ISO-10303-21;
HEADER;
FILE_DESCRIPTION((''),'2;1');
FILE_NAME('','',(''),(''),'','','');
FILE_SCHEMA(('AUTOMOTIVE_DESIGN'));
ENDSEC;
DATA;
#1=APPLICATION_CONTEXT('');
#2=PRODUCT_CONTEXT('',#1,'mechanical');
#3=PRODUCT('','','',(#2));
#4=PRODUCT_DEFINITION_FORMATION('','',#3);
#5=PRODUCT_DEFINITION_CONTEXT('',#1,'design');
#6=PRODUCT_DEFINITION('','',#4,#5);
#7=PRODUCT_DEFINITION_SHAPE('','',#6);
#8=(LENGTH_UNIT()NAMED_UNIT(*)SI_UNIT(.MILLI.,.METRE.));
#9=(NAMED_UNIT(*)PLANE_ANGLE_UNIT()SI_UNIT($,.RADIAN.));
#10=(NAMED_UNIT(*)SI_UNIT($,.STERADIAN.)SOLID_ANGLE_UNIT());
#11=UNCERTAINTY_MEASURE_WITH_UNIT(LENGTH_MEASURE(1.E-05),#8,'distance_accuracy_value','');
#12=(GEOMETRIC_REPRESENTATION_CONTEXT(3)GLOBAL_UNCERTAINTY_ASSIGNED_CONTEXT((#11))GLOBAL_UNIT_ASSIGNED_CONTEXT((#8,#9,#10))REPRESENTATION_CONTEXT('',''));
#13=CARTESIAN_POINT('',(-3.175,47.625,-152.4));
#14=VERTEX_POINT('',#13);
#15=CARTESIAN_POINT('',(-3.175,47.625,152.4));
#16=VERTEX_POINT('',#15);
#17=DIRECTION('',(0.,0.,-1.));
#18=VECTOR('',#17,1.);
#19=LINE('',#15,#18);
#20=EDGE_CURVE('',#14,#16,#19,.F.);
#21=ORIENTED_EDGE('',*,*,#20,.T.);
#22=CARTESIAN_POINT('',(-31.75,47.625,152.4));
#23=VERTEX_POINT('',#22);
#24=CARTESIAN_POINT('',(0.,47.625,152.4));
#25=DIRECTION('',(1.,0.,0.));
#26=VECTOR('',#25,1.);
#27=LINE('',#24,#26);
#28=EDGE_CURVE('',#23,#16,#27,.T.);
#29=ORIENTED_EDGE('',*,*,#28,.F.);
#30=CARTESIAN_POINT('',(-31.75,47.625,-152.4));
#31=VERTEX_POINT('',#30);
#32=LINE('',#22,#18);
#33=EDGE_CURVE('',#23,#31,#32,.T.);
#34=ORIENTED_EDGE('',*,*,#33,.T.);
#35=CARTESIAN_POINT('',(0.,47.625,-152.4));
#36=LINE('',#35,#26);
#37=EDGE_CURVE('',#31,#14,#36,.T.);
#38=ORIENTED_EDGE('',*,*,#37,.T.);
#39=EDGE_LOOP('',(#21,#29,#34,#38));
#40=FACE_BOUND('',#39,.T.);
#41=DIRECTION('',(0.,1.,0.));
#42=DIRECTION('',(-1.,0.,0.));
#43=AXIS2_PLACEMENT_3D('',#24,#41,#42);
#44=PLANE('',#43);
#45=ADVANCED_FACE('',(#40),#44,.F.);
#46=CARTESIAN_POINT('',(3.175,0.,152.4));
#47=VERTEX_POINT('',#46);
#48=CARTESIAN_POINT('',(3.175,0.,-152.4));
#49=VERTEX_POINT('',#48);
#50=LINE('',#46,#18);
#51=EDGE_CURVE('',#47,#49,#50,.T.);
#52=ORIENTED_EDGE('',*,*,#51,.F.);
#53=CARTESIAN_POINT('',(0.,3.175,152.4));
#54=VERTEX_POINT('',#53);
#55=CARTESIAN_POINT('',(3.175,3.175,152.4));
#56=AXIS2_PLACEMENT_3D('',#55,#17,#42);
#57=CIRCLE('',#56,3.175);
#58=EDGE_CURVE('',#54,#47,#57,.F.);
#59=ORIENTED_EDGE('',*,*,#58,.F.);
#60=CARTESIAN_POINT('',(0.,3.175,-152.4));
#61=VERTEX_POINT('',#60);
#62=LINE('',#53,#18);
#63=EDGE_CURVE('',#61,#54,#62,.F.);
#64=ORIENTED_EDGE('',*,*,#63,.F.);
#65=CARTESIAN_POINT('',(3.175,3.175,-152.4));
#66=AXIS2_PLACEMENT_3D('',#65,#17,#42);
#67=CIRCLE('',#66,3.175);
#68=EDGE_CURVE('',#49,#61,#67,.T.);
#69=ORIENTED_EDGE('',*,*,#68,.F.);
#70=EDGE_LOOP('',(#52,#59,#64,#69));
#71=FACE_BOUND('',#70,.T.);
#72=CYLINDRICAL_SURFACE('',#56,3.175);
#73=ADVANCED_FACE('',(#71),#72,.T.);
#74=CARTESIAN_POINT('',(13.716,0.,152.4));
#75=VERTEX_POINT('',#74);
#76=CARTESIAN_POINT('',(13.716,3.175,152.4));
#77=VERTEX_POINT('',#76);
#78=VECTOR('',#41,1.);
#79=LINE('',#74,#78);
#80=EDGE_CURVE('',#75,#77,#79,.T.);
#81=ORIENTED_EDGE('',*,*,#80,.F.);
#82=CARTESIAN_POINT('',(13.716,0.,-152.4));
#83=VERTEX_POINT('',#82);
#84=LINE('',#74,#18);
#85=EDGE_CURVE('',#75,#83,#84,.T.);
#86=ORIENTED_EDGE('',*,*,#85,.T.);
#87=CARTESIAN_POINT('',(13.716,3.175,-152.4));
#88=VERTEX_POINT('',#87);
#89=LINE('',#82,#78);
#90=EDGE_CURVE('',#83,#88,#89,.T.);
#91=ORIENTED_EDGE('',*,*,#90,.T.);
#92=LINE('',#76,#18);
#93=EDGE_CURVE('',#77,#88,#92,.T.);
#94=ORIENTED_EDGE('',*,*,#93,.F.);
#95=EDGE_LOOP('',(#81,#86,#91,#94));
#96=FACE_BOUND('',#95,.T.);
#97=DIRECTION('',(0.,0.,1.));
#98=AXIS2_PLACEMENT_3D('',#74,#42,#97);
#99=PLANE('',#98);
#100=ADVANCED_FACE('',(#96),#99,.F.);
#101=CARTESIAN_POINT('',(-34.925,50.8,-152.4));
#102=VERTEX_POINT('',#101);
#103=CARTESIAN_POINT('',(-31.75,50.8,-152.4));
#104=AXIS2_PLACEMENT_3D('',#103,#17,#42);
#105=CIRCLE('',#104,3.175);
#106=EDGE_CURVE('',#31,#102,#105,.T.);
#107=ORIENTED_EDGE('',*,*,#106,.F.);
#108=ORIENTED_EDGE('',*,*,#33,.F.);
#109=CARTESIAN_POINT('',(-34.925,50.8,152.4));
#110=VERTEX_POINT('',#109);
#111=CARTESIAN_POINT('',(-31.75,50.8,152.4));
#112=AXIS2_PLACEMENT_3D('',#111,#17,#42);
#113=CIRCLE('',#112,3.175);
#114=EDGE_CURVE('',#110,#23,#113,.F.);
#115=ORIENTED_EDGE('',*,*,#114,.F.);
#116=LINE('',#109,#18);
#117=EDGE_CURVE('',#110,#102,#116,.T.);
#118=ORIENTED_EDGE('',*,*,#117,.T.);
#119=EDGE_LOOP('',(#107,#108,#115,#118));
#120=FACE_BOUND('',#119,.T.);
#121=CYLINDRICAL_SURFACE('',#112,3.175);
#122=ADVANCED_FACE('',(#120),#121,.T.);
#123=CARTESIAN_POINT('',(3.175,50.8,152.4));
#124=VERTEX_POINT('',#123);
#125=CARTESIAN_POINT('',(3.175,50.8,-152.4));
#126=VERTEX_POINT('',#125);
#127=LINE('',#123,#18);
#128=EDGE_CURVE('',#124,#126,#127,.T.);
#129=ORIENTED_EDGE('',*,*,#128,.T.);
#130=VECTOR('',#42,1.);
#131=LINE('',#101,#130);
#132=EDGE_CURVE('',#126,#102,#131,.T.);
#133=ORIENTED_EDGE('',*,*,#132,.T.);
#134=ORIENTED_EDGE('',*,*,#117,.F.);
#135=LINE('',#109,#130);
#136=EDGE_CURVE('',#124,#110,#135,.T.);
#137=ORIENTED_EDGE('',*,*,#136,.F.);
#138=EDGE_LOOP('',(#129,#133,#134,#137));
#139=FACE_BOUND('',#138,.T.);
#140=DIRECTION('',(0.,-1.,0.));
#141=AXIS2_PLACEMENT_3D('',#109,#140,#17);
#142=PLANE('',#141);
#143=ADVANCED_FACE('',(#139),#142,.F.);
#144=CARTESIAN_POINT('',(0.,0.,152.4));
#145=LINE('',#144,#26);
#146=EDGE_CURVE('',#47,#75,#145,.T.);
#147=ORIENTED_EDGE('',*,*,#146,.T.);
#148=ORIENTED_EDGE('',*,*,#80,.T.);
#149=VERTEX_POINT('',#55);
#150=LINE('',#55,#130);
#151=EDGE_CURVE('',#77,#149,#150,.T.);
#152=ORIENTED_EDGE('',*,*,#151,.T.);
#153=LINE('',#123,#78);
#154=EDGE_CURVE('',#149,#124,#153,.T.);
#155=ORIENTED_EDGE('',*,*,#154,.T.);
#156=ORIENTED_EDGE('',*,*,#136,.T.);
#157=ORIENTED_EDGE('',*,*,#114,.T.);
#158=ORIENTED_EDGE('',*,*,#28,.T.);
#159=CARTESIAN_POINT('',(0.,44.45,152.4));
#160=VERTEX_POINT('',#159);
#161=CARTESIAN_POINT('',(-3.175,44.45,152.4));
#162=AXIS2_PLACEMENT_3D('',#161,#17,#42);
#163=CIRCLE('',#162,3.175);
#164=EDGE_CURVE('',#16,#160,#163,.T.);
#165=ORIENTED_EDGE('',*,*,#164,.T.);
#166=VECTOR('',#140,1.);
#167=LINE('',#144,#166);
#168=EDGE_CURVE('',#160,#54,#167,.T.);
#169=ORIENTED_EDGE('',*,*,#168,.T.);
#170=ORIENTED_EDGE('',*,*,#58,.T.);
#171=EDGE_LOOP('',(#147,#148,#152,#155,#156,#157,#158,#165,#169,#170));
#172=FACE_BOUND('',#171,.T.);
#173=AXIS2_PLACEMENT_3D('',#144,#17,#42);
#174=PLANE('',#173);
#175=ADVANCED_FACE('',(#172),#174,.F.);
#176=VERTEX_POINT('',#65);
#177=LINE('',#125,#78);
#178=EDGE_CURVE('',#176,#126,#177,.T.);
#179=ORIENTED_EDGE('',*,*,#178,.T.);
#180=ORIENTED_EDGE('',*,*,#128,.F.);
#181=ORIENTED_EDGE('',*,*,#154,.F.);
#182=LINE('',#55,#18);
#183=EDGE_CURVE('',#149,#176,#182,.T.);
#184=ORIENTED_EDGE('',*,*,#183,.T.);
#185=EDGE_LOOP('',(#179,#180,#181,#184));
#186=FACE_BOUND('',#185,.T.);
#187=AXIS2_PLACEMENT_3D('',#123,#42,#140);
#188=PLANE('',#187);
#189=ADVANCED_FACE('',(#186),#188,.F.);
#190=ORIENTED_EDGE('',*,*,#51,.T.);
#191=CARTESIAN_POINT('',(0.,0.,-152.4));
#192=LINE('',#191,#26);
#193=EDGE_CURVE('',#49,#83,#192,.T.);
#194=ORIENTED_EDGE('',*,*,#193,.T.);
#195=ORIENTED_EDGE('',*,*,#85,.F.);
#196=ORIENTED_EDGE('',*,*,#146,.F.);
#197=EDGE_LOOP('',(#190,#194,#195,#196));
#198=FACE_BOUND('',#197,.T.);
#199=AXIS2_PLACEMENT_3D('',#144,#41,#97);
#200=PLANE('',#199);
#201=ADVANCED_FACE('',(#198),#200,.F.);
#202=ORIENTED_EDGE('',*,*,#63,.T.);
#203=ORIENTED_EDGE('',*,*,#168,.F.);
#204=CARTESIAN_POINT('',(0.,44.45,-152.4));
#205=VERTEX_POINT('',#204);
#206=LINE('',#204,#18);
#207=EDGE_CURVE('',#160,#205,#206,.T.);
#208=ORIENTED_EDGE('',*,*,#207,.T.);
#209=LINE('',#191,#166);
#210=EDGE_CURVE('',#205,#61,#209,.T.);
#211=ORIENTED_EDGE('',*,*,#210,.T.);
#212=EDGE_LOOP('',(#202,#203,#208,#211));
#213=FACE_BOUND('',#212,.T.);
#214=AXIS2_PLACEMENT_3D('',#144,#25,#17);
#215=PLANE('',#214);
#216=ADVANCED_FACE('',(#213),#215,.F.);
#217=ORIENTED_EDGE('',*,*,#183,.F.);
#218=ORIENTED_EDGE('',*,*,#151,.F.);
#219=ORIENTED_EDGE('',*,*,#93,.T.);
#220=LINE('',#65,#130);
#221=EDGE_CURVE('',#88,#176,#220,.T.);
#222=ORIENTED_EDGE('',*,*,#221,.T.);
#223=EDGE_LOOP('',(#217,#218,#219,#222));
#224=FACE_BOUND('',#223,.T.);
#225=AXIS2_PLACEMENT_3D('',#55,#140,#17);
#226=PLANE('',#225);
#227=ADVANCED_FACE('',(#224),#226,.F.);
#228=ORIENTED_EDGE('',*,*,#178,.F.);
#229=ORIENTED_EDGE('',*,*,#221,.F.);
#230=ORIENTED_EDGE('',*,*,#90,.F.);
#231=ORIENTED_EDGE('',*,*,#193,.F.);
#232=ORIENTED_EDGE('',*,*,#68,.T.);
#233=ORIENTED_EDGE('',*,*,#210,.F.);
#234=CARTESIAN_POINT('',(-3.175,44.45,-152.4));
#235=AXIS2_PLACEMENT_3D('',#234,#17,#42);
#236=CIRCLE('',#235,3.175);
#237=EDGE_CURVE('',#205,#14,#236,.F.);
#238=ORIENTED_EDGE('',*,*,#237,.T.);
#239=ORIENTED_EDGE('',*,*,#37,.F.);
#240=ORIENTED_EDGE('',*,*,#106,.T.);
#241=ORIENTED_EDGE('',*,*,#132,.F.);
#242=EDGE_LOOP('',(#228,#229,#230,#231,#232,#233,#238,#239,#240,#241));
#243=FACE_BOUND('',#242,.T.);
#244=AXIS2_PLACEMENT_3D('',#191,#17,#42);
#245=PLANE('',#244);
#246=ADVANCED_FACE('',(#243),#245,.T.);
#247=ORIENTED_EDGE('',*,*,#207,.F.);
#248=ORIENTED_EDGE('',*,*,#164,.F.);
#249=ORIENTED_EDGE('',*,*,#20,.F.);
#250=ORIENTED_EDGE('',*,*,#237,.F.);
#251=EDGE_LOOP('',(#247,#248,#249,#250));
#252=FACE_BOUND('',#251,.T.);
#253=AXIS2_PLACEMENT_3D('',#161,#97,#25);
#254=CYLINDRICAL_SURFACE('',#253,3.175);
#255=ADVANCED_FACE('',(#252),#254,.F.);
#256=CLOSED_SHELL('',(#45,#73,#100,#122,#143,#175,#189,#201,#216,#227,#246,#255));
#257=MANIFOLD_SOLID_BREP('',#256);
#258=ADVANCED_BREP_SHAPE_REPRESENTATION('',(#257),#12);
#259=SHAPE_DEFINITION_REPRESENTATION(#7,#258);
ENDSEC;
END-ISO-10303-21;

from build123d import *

# Parameters (mm, degrees)
BOSS_EXTRUDE1_DEPTH = 152.4
FILLET1_R           = 3.175


with BuildPart() as part:
    # Sketch3 → Boss-Extrude1 (new, symmetric)
    with BuildSketch(Plane.XY):
        Polygon((-34.925, 50.8), (3.175, 50.8), (3.175, 3.175), (13.716, 3.175), (13.716, 0), (0, 0), (0, 47.625), (-34.925, 47.625), align=None)
    extrude(amount=BOSS_EXTRUDE1_DEPTH, both=True)

    # Fillet1
    fillet1_edges = [part.edges().sort_by_distance(p)[0] for p in [
        (-34.925, 47.625, 0),
        (0, 47.625, 0),
        (0, 0, 0),
    ]]
    fillet(fillet1_edges, radius=FILLET1_R - 0.0001)  # a hair under: the kernel refuses the full size


solid = part.part
